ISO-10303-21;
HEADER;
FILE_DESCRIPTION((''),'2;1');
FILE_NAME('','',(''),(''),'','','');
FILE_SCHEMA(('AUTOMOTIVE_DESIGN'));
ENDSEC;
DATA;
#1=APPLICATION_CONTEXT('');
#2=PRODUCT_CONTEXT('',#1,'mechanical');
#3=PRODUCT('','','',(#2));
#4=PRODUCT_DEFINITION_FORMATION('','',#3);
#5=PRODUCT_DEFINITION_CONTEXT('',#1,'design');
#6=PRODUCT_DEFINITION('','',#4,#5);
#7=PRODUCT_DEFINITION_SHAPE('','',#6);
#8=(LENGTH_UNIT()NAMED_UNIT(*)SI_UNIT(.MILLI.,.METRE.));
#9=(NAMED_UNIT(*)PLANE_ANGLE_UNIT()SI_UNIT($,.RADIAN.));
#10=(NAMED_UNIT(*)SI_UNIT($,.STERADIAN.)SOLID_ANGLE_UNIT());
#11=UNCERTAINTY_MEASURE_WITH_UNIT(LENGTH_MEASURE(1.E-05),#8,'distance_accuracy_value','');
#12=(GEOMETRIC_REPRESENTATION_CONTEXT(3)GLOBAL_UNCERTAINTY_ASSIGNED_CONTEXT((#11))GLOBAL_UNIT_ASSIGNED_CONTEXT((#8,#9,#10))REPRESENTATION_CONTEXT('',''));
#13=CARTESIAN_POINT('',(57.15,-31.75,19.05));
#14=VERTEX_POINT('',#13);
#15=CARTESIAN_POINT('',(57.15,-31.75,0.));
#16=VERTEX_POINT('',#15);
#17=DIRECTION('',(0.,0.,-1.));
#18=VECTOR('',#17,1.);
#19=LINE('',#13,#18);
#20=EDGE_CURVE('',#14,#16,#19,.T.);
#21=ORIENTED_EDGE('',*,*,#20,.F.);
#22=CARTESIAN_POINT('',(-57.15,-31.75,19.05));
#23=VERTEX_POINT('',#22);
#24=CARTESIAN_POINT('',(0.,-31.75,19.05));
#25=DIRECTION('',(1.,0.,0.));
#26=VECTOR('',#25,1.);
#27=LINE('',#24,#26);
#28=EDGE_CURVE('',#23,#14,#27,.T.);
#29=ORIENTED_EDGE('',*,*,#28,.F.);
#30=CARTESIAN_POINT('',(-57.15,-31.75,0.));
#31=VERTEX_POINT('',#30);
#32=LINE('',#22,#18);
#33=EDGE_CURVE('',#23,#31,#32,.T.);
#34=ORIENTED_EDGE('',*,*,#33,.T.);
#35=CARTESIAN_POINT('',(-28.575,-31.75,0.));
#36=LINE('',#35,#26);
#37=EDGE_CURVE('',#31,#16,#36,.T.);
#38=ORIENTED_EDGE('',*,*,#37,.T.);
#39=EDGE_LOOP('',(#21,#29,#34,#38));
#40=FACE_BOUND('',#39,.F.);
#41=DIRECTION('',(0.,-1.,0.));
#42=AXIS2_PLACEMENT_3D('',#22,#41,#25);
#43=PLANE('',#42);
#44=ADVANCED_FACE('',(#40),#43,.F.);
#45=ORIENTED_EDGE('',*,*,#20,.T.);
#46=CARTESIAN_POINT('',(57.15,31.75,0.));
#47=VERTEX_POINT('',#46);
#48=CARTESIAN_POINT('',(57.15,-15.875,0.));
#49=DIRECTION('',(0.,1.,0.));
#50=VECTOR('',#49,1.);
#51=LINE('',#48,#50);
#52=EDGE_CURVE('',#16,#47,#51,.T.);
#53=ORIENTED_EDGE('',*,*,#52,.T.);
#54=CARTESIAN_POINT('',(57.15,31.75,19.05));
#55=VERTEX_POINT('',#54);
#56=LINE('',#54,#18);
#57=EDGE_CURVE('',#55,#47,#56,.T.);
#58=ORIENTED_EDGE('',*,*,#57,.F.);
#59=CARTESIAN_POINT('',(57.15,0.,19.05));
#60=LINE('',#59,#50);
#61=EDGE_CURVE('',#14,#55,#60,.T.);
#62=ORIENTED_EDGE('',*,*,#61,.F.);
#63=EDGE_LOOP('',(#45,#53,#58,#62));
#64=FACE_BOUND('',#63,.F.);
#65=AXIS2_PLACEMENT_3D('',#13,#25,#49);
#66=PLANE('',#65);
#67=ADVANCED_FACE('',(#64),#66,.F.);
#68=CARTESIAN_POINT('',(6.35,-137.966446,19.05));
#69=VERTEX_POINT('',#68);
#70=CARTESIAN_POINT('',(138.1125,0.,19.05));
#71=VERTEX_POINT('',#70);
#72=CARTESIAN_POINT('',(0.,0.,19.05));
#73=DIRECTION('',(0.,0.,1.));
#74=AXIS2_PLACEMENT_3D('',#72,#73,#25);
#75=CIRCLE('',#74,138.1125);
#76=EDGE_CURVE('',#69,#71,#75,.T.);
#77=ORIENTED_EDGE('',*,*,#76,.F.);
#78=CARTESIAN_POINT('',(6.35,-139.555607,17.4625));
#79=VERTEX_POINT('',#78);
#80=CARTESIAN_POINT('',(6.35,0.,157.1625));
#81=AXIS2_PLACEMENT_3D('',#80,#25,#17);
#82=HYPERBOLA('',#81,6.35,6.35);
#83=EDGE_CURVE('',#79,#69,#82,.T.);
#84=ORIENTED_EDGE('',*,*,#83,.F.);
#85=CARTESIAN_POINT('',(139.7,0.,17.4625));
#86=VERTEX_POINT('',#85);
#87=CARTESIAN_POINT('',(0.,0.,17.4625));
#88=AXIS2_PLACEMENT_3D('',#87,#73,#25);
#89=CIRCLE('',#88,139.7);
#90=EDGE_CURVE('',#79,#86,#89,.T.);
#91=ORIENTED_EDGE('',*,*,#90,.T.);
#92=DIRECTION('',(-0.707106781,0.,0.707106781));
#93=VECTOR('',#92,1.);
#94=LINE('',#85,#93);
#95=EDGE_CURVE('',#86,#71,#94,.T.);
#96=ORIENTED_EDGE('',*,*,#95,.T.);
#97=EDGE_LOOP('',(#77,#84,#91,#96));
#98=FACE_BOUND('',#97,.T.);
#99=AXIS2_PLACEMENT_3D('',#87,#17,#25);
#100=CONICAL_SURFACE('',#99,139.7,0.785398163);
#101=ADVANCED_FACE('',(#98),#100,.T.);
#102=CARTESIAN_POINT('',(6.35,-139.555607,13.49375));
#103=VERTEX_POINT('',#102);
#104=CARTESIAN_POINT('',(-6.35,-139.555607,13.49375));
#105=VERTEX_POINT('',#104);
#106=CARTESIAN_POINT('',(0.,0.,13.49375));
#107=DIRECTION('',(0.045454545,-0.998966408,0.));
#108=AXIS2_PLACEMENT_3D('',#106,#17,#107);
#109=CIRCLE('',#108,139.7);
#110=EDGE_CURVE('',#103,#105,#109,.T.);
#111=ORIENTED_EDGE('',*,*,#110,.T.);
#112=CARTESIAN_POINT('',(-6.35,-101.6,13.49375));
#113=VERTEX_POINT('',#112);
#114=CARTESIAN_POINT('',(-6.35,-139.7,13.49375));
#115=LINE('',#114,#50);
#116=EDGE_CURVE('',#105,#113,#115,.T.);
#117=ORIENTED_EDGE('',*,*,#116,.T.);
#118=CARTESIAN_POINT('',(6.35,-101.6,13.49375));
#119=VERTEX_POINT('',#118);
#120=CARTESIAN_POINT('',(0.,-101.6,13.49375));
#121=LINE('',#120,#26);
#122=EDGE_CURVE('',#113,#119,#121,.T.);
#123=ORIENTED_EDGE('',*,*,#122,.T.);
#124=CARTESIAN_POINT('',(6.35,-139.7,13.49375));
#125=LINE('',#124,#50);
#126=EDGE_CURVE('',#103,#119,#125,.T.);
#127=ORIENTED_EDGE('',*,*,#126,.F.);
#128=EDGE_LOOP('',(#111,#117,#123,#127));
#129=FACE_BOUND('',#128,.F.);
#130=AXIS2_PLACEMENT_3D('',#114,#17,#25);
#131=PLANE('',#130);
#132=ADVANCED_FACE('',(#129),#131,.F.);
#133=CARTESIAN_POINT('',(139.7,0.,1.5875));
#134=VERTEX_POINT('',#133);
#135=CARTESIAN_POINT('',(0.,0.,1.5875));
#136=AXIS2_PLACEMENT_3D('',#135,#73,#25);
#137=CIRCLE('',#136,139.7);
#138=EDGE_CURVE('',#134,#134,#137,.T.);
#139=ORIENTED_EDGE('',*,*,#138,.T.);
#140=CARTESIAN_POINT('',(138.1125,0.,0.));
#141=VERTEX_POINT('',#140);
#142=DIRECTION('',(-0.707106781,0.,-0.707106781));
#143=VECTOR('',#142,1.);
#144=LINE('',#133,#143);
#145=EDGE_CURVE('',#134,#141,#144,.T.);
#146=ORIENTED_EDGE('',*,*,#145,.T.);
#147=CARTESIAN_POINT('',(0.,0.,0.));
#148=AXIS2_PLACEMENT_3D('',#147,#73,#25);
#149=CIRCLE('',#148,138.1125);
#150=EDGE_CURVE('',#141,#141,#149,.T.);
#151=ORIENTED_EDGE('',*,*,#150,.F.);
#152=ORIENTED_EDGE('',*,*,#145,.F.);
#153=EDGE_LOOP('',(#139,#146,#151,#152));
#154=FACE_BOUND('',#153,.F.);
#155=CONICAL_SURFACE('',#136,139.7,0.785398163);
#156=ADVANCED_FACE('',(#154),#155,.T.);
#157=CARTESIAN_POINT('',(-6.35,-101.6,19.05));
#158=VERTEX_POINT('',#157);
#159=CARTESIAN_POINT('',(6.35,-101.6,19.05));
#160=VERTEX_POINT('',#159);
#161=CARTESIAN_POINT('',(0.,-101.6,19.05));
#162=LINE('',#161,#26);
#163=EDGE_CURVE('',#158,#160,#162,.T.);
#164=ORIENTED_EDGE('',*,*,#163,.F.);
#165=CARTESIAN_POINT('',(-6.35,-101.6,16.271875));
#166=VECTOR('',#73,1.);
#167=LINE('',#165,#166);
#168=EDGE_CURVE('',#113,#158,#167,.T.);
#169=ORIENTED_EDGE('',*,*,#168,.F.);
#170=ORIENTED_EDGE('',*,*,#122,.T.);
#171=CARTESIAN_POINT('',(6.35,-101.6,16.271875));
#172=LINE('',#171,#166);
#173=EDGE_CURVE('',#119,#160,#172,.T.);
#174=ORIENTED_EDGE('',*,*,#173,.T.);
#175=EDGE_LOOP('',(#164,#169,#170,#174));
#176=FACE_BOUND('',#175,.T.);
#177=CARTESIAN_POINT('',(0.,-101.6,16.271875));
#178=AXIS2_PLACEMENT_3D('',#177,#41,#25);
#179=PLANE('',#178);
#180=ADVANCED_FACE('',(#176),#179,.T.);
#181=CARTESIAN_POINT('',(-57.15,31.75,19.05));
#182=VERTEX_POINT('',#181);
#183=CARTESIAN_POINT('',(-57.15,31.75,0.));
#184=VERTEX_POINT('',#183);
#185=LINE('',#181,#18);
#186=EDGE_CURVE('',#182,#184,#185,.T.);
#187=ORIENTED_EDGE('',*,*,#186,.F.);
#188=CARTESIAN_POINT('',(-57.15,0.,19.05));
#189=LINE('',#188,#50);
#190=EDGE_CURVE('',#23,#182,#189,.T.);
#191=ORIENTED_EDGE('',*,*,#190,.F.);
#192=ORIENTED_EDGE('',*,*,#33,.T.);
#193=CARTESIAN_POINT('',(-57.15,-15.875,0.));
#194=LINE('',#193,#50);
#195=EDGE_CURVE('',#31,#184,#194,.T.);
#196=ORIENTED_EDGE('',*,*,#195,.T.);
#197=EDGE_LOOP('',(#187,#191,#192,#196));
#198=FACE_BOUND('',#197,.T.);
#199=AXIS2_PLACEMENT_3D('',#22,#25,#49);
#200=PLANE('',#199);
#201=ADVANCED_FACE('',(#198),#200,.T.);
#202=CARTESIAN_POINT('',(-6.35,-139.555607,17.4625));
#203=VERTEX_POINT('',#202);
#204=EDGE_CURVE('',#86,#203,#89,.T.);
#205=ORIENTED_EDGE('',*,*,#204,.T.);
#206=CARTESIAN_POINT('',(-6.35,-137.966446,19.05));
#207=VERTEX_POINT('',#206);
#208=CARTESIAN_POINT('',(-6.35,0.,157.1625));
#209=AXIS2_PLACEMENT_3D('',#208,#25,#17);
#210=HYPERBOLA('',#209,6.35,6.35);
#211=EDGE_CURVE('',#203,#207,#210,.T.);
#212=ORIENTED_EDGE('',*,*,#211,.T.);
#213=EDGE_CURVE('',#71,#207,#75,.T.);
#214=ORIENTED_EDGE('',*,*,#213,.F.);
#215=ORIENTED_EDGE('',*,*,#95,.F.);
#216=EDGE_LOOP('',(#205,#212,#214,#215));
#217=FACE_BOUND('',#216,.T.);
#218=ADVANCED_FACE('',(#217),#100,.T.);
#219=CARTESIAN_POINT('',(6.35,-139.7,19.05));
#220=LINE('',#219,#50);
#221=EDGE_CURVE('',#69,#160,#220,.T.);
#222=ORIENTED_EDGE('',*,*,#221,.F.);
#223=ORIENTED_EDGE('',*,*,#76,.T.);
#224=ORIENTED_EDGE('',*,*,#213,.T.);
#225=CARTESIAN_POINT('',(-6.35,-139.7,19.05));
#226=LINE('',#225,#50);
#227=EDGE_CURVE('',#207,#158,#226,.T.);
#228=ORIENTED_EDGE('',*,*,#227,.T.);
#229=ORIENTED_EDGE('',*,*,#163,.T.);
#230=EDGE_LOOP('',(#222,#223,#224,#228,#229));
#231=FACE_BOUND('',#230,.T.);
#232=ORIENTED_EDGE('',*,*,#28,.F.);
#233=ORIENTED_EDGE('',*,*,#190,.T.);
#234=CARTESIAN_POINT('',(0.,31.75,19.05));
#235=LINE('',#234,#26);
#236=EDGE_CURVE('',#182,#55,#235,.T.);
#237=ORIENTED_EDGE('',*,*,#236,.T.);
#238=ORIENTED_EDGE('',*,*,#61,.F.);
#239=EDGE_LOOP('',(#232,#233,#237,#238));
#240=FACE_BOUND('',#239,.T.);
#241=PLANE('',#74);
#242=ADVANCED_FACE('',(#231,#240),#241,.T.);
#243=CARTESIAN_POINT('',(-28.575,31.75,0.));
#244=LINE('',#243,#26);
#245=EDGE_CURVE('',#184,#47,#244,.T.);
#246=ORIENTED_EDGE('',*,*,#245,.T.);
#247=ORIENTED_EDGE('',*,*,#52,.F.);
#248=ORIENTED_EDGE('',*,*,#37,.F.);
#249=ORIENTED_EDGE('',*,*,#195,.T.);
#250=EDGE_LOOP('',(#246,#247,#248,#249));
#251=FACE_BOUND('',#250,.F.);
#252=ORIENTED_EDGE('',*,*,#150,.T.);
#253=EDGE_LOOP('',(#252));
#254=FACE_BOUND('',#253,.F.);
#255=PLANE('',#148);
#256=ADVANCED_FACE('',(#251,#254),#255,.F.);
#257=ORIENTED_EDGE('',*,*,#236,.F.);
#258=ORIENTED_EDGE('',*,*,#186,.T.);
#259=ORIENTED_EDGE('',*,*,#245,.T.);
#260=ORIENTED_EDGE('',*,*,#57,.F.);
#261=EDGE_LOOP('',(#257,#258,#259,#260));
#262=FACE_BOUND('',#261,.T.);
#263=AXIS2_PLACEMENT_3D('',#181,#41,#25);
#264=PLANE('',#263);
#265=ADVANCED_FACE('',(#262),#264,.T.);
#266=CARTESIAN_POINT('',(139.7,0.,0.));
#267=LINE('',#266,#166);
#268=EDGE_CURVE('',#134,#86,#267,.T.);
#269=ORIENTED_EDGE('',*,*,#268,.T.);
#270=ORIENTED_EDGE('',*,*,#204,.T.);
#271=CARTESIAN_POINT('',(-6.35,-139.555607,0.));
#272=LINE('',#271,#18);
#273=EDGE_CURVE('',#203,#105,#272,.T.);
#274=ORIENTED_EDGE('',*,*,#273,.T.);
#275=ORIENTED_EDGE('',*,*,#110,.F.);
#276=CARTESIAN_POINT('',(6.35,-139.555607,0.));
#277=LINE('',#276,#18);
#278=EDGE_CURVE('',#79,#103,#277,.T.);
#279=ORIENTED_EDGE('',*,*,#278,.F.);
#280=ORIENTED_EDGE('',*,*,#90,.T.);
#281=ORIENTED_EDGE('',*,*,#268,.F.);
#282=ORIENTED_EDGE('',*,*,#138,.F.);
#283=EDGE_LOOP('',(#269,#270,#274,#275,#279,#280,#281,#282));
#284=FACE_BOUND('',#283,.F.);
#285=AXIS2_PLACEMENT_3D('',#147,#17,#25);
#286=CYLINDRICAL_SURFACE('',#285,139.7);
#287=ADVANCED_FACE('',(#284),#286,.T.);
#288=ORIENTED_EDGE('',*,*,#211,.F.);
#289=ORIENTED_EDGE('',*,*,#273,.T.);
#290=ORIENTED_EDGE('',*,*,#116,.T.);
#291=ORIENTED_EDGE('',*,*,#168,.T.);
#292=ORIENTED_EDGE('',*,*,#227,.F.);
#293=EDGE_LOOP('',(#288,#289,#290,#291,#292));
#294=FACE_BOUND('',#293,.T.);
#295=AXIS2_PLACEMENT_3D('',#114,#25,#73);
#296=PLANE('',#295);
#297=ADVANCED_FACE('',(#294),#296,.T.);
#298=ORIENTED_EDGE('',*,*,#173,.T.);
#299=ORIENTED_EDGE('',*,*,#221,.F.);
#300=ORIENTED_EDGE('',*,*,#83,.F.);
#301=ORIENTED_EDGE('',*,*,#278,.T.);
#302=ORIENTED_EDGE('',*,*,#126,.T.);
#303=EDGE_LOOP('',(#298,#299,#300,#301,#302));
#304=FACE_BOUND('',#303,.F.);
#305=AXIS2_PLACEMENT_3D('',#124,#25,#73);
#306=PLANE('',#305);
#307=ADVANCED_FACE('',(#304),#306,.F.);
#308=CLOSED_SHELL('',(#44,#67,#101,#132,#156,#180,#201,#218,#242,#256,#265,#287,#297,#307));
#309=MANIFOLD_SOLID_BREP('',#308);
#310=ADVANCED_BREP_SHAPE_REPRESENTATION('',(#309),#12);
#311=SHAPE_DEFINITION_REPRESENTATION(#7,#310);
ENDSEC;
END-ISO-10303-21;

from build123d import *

# Parameters (mm, degrees)
F2_R     = 139.7
F2_R_2   = 2.9765625
F3_DEPTH = 19.05
F4_SIZE  = 1.5875
F6_W     = 12.7
F6_H     = 5.55625
F7_DEPTH = 38.1
F8_W     = 114.3
F8_H     = 63.5
F8_R     = 2.9765625
F9_DEPTH = 19.051


# Not quite as in the source:
# - a variable given as a bare number and used for a length is read in inches; the dataset says mm whatever the document's units were


with BuildPart() as f3:
    # F2 (on Top) → F3 (new body)
    with BuildSketch(Plane.XY):
        Circle(F2_R)
        Circle(F2_R_2, mode=Mode.SUBTRACT)
    extrude(amount=F3_DEPTH)

    # F4
    f4_edges = [f3.edges().sort_by_distance(p)[0] for p in [
        (-139.7, 0, 19.05),
        (-139.7, 0, 0),
    ]]
    chamfer(f4_edges, length=F4_SIZE)

    # F6 (on offset) → F7 (cut)
    with BuildSketch(Plane.XZ.offset(139.7)):
        with Locations((0, 16.271875)):
            Rectangle(F6_W, F6_H)
    extrude(amount=-F7_DEPTH, mode=Mode.SUBTRACT)

    # F8 (on face) → F9 (cut, through all)
    with BuildSketch(Plane.XY.offset(19.05)):
        Rectangle(F8_W, F8_H)
        Circle(F8_R, mode=Mode.SUBTRACT)
    extrude(amount=-F9_DEPTH, mode=Mode.SUBTRACT)


solid = f3.part
